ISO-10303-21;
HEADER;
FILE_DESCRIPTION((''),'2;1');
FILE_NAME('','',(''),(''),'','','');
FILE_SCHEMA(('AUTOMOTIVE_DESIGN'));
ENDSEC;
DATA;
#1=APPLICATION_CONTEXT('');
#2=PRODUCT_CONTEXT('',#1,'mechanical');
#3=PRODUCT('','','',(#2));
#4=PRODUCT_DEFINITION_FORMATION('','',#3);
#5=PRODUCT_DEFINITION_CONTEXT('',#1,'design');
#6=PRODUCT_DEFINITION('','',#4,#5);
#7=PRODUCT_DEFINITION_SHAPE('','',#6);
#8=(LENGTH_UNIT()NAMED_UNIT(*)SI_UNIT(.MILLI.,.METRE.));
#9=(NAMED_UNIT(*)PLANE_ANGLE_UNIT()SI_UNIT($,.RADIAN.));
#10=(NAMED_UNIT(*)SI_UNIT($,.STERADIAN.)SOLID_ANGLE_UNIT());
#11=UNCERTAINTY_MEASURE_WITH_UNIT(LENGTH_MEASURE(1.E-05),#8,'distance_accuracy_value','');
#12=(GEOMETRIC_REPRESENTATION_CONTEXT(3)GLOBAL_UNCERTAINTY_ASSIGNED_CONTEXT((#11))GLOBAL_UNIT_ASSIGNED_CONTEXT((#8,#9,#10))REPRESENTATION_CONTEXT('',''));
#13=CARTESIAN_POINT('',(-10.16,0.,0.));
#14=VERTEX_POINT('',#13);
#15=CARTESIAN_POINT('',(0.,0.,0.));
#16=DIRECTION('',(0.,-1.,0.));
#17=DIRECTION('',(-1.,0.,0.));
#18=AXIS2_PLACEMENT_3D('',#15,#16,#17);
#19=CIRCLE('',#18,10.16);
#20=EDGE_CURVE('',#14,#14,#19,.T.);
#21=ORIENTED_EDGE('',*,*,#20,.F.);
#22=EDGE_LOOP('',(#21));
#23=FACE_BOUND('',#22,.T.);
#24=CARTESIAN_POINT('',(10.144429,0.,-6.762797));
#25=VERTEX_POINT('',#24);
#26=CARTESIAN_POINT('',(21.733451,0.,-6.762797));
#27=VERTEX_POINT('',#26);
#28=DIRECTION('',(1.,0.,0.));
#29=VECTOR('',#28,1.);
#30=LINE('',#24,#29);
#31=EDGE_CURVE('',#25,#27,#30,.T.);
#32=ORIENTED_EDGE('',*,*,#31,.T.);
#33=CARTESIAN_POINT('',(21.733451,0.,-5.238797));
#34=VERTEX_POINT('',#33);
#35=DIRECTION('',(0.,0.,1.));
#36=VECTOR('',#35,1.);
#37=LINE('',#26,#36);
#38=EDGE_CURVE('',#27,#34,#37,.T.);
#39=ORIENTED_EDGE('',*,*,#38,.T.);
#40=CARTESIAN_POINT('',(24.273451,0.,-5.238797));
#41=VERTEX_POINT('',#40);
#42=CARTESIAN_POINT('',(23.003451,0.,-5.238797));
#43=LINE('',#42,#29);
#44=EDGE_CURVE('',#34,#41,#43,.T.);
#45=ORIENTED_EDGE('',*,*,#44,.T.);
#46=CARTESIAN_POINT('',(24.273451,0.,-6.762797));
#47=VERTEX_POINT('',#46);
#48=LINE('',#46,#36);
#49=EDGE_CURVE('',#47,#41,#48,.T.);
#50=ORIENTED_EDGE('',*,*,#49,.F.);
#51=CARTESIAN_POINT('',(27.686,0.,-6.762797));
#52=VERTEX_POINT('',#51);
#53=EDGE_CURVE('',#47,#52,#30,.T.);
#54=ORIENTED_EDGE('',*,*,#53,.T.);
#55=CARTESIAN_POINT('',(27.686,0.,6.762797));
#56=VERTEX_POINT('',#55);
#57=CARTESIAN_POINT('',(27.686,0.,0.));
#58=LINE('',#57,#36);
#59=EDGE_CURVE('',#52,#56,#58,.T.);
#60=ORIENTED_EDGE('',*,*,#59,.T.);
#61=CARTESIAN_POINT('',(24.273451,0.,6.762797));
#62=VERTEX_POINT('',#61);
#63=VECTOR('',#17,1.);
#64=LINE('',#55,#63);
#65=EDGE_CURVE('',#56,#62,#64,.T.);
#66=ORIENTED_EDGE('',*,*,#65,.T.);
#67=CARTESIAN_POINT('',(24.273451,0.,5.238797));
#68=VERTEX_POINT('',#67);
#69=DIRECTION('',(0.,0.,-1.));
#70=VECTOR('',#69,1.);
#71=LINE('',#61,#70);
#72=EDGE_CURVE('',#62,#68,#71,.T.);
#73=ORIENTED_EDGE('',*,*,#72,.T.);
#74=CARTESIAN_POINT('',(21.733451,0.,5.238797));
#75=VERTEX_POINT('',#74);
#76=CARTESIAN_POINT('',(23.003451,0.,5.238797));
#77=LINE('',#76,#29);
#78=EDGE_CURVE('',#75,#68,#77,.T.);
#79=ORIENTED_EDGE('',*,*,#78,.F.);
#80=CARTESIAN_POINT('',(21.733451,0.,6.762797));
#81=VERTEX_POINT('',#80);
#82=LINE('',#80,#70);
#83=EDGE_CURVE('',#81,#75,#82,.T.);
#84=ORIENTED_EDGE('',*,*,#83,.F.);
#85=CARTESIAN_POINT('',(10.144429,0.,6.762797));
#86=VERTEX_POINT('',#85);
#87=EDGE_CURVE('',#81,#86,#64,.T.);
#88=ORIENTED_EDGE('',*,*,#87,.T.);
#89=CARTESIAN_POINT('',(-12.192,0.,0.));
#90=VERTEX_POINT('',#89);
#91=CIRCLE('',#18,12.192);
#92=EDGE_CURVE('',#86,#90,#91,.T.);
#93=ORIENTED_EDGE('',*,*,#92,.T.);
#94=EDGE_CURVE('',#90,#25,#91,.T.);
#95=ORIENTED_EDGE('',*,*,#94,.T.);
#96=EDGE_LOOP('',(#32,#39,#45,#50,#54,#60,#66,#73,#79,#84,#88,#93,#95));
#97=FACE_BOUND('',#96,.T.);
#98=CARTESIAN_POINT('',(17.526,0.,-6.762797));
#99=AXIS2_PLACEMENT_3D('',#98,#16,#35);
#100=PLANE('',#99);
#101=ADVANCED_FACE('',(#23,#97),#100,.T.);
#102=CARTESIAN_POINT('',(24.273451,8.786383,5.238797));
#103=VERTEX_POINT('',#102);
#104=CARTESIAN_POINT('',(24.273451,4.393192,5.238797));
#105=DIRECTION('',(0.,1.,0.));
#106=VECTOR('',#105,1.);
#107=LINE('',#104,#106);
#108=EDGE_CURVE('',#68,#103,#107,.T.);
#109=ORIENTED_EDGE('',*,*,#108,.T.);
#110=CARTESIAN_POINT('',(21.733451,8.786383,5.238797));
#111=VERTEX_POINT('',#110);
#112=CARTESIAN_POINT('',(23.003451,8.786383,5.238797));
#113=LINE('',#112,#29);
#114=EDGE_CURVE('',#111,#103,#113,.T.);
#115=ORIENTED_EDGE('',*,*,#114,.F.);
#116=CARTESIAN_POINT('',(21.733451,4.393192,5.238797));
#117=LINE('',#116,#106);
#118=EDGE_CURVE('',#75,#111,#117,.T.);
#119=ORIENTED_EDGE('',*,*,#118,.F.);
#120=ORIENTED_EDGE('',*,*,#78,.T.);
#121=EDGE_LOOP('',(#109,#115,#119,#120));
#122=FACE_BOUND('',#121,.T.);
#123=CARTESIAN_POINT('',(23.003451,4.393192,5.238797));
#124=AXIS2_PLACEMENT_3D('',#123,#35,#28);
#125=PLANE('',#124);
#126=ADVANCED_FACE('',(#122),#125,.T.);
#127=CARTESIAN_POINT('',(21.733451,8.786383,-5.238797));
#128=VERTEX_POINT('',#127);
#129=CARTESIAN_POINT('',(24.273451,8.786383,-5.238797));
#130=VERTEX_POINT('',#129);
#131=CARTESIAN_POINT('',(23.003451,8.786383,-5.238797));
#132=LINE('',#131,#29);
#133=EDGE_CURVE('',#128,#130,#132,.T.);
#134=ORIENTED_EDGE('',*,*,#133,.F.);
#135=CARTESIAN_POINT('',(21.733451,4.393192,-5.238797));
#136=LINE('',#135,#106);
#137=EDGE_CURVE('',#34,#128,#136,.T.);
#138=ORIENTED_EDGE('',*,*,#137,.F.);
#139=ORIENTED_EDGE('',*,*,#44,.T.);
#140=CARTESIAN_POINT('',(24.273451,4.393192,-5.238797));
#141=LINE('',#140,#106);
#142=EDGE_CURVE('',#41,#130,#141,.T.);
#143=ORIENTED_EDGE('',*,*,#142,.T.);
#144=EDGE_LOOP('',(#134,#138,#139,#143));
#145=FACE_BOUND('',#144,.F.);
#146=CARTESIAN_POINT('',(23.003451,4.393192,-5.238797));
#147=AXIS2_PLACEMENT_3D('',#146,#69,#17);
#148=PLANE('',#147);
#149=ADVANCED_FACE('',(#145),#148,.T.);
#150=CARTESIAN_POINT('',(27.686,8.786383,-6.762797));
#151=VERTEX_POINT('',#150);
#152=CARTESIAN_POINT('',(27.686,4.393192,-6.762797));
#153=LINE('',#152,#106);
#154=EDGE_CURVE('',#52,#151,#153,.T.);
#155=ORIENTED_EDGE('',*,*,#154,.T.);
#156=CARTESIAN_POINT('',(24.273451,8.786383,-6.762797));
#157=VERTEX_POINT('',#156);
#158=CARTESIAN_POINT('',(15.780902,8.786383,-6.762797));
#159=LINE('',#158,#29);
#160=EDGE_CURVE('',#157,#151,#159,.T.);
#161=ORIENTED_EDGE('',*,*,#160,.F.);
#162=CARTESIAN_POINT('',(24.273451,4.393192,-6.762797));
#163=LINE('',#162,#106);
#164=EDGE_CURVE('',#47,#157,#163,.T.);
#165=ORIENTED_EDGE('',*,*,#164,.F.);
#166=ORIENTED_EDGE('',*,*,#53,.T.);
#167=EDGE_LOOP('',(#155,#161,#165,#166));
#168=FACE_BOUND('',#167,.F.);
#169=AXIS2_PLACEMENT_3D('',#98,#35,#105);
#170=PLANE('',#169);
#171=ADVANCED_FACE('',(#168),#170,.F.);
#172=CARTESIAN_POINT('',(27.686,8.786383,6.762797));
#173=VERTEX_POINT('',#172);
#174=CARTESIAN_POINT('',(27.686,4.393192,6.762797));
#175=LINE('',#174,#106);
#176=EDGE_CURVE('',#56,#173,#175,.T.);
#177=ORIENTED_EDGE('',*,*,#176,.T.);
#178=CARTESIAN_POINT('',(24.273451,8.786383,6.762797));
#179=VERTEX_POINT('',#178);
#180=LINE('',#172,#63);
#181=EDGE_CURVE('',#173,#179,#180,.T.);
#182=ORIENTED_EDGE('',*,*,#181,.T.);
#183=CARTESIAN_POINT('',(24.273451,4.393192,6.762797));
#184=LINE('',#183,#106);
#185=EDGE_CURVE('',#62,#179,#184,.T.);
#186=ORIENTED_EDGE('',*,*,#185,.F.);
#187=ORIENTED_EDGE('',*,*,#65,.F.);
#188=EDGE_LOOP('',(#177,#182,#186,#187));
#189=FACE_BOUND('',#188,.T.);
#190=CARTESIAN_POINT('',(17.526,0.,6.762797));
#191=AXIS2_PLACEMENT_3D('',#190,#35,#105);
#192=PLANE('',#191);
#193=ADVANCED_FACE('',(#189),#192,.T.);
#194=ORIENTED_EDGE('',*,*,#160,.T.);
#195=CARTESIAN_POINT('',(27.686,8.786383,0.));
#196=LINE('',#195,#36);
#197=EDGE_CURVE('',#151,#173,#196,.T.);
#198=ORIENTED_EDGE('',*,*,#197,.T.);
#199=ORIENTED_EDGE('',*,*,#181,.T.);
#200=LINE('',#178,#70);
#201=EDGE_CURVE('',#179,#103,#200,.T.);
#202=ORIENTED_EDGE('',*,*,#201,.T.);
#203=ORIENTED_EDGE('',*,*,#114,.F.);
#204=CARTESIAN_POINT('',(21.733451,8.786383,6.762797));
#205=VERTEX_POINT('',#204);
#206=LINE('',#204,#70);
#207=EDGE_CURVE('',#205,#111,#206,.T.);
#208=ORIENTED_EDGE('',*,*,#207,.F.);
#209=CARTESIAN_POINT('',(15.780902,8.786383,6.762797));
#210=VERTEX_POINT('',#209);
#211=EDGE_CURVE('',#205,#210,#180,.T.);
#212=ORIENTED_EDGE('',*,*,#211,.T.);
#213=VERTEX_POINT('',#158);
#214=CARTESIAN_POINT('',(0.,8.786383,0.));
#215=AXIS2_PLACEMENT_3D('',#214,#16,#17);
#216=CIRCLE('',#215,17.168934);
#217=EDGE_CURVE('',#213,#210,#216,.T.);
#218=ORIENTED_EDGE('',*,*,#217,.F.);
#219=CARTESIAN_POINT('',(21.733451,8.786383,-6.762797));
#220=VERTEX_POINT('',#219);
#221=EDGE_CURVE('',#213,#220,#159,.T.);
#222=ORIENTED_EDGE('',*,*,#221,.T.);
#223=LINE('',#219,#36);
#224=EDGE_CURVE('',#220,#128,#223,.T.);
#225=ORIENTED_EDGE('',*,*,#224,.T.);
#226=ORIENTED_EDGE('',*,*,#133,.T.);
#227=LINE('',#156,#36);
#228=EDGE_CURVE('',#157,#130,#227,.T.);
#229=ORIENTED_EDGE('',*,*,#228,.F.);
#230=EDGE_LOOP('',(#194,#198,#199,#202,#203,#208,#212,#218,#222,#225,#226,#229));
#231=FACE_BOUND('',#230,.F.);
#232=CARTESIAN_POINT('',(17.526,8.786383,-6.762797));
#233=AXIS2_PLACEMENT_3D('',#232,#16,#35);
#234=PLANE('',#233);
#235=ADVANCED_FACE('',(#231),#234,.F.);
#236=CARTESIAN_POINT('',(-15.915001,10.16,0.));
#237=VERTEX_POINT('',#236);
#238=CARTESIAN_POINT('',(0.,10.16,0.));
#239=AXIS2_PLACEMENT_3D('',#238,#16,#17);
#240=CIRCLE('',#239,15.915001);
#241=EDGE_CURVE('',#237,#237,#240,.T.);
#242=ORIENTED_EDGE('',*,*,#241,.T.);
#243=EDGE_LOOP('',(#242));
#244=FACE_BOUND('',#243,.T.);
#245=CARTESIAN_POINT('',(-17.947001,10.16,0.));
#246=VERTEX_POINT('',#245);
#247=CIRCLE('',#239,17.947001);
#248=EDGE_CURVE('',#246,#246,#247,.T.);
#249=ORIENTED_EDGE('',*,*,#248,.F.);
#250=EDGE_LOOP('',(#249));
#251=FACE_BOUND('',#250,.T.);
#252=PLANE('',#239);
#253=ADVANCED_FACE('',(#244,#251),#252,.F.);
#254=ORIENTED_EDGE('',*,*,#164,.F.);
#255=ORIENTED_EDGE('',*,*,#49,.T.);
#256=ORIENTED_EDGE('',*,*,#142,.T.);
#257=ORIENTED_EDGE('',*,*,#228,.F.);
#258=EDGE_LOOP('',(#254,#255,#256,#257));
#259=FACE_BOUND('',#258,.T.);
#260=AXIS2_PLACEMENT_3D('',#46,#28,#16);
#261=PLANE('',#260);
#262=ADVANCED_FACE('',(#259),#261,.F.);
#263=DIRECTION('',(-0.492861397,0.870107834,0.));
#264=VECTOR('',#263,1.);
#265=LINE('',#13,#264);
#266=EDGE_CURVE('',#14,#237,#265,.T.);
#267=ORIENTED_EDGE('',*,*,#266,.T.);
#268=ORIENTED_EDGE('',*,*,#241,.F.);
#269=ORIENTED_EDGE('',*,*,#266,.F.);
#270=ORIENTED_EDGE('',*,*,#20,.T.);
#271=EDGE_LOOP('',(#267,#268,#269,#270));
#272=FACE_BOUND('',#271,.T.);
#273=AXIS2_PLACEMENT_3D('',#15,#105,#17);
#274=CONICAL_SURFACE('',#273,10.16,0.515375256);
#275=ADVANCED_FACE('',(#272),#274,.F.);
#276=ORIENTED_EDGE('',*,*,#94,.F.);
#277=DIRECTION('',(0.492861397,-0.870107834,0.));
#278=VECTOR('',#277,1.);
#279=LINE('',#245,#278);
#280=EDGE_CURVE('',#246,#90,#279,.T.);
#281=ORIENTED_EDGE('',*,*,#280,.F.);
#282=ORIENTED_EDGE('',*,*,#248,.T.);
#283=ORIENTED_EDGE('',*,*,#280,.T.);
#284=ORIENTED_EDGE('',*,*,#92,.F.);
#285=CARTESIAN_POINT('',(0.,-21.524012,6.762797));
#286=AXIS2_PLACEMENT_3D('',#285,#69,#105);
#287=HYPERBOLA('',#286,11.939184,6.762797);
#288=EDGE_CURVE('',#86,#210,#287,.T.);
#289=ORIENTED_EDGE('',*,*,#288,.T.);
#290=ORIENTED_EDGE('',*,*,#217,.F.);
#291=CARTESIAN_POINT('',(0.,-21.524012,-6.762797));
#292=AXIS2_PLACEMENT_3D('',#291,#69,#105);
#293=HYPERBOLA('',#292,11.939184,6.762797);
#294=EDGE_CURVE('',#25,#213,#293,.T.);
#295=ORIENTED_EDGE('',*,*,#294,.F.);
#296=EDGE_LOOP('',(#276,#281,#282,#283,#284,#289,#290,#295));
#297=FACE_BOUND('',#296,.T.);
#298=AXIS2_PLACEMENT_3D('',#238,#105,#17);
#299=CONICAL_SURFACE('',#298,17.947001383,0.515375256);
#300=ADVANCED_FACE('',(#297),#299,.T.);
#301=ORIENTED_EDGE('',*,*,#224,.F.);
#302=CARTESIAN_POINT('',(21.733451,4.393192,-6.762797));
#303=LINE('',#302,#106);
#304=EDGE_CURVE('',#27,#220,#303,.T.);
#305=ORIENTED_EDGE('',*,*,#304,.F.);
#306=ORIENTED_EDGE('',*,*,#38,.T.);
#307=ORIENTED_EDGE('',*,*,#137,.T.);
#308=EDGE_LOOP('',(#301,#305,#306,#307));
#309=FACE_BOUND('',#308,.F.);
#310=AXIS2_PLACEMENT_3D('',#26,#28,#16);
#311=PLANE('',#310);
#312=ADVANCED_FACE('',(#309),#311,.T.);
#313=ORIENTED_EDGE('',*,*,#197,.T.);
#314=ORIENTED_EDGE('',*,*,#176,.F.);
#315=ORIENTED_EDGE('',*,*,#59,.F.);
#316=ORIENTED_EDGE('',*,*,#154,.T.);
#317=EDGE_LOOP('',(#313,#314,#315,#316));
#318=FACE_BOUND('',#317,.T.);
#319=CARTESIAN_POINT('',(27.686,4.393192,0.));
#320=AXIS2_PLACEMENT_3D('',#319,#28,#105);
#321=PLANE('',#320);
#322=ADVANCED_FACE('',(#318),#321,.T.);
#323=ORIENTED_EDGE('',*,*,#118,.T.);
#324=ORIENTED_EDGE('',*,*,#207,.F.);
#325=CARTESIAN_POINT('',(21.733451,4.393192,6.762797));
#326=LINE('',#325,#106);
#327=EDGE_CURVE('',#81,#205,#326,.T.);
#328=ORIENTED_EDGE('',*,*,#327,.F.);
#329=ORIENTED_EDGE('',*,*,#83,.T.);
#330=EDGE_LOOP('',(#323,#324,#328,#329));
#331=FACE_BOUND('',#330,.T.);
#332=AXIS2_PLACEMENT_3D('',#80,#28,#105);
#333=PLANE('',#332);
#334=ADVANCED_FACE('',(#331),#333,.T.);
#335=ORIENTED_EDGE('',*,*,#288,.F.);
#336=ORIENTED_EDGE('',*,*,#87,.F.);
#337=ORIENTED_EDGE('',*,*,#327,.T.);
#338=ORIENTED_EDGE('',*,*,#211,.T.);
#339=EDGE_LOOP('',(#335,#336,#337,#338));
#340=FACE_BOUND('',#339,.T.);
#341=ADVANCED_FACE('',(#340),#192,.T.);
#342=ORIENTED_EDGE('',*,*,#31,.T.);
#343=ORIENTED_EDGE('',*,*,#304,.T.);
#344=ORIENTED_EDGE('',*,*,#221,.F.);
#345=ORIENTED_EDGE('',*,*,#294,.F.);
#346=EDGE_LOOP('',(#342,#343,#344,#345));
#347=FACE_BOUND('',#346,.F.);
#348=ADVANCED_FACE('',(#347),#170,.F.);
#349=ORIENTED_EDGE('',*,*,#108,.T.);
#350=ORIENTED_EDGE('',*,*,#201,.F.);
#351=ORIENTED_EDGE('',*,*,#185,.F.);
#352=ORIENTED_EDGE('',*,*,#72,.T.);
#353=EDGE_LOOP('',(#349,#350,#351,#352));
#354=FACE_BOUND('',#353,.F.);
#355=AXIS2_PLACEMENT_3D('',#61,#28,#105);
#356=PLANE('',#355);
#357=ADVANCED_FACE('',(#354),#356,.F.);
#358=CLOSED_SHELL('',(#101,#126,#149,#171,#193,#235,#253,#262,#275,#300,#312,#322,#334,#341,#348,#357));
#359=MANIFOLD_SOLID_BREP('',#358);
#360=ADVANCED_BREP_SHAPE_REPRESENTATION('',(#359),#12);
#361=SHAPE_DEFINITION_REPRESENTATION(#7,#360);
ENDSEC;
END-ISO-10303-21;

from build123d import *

# Parameters (mm, degrees)
F3_W     = 8.786383085
F3_H     = 13.5255949572
F5_DEPTH = 10.16
F6_W     = 2.54
F6_H     = 8.786383085
F7_DEPTH = 1.524


# Not quite as in the source:
# - a pattern or mirror of a feature is missing from the dataset's text; its kind, count and spacing are read off the source's solid


with BuildPart() as f1:
    # F0 (on Top) → F1 (revolve)
    with BuildSketch(Plane.XY):
        Polygon((-12.192, 0), (-10.16, 0), (-15.9150013827, 10.16), (-17.9470013827, 10.16), align=None)
    revolve(axis=Axis((0, 4.3423168827, 0), (0, -1, 0)))

    # F3 (on offset) → F4 (join, up to the next surface of F1)
    with BuildSketch(Plane.YZ.offset(17.526)):
        with Locations((4.3931915425, 0)):
            Rectangle(F3_W, F3_H)
    extrude(until=Until.NEXT, dir=(-1, 0, 0))

    # F5 (add): a face of the model
    f5_faces = [f1.faces().sort_by_distance(p)[0] for p in [
        (17.526, 4.3931915425, 0),
    ]]
    extrude(f5_faces, amount=F5_DEPTH)

    # F6 (on face) → F7 (cut)
    with BuildSketch(Plane.XY.offset(6.7627974786)):
        with Locations((23.0034508117, 4.3931915425)):
            Rectangle(F6_W, F6_H)
    f7 = extrude(amount=-F7_DEPTH, mode=Mode.SUBTRACT)

    # F7_copies: F7 across plane
    add(f7.mirror(Plane(origin=(0, 0, 0), x_dir=(-1, 0, 0), z_dir=(0, 0, -1))), mode=Mode.SUBTRACT)


solid = f1.part
